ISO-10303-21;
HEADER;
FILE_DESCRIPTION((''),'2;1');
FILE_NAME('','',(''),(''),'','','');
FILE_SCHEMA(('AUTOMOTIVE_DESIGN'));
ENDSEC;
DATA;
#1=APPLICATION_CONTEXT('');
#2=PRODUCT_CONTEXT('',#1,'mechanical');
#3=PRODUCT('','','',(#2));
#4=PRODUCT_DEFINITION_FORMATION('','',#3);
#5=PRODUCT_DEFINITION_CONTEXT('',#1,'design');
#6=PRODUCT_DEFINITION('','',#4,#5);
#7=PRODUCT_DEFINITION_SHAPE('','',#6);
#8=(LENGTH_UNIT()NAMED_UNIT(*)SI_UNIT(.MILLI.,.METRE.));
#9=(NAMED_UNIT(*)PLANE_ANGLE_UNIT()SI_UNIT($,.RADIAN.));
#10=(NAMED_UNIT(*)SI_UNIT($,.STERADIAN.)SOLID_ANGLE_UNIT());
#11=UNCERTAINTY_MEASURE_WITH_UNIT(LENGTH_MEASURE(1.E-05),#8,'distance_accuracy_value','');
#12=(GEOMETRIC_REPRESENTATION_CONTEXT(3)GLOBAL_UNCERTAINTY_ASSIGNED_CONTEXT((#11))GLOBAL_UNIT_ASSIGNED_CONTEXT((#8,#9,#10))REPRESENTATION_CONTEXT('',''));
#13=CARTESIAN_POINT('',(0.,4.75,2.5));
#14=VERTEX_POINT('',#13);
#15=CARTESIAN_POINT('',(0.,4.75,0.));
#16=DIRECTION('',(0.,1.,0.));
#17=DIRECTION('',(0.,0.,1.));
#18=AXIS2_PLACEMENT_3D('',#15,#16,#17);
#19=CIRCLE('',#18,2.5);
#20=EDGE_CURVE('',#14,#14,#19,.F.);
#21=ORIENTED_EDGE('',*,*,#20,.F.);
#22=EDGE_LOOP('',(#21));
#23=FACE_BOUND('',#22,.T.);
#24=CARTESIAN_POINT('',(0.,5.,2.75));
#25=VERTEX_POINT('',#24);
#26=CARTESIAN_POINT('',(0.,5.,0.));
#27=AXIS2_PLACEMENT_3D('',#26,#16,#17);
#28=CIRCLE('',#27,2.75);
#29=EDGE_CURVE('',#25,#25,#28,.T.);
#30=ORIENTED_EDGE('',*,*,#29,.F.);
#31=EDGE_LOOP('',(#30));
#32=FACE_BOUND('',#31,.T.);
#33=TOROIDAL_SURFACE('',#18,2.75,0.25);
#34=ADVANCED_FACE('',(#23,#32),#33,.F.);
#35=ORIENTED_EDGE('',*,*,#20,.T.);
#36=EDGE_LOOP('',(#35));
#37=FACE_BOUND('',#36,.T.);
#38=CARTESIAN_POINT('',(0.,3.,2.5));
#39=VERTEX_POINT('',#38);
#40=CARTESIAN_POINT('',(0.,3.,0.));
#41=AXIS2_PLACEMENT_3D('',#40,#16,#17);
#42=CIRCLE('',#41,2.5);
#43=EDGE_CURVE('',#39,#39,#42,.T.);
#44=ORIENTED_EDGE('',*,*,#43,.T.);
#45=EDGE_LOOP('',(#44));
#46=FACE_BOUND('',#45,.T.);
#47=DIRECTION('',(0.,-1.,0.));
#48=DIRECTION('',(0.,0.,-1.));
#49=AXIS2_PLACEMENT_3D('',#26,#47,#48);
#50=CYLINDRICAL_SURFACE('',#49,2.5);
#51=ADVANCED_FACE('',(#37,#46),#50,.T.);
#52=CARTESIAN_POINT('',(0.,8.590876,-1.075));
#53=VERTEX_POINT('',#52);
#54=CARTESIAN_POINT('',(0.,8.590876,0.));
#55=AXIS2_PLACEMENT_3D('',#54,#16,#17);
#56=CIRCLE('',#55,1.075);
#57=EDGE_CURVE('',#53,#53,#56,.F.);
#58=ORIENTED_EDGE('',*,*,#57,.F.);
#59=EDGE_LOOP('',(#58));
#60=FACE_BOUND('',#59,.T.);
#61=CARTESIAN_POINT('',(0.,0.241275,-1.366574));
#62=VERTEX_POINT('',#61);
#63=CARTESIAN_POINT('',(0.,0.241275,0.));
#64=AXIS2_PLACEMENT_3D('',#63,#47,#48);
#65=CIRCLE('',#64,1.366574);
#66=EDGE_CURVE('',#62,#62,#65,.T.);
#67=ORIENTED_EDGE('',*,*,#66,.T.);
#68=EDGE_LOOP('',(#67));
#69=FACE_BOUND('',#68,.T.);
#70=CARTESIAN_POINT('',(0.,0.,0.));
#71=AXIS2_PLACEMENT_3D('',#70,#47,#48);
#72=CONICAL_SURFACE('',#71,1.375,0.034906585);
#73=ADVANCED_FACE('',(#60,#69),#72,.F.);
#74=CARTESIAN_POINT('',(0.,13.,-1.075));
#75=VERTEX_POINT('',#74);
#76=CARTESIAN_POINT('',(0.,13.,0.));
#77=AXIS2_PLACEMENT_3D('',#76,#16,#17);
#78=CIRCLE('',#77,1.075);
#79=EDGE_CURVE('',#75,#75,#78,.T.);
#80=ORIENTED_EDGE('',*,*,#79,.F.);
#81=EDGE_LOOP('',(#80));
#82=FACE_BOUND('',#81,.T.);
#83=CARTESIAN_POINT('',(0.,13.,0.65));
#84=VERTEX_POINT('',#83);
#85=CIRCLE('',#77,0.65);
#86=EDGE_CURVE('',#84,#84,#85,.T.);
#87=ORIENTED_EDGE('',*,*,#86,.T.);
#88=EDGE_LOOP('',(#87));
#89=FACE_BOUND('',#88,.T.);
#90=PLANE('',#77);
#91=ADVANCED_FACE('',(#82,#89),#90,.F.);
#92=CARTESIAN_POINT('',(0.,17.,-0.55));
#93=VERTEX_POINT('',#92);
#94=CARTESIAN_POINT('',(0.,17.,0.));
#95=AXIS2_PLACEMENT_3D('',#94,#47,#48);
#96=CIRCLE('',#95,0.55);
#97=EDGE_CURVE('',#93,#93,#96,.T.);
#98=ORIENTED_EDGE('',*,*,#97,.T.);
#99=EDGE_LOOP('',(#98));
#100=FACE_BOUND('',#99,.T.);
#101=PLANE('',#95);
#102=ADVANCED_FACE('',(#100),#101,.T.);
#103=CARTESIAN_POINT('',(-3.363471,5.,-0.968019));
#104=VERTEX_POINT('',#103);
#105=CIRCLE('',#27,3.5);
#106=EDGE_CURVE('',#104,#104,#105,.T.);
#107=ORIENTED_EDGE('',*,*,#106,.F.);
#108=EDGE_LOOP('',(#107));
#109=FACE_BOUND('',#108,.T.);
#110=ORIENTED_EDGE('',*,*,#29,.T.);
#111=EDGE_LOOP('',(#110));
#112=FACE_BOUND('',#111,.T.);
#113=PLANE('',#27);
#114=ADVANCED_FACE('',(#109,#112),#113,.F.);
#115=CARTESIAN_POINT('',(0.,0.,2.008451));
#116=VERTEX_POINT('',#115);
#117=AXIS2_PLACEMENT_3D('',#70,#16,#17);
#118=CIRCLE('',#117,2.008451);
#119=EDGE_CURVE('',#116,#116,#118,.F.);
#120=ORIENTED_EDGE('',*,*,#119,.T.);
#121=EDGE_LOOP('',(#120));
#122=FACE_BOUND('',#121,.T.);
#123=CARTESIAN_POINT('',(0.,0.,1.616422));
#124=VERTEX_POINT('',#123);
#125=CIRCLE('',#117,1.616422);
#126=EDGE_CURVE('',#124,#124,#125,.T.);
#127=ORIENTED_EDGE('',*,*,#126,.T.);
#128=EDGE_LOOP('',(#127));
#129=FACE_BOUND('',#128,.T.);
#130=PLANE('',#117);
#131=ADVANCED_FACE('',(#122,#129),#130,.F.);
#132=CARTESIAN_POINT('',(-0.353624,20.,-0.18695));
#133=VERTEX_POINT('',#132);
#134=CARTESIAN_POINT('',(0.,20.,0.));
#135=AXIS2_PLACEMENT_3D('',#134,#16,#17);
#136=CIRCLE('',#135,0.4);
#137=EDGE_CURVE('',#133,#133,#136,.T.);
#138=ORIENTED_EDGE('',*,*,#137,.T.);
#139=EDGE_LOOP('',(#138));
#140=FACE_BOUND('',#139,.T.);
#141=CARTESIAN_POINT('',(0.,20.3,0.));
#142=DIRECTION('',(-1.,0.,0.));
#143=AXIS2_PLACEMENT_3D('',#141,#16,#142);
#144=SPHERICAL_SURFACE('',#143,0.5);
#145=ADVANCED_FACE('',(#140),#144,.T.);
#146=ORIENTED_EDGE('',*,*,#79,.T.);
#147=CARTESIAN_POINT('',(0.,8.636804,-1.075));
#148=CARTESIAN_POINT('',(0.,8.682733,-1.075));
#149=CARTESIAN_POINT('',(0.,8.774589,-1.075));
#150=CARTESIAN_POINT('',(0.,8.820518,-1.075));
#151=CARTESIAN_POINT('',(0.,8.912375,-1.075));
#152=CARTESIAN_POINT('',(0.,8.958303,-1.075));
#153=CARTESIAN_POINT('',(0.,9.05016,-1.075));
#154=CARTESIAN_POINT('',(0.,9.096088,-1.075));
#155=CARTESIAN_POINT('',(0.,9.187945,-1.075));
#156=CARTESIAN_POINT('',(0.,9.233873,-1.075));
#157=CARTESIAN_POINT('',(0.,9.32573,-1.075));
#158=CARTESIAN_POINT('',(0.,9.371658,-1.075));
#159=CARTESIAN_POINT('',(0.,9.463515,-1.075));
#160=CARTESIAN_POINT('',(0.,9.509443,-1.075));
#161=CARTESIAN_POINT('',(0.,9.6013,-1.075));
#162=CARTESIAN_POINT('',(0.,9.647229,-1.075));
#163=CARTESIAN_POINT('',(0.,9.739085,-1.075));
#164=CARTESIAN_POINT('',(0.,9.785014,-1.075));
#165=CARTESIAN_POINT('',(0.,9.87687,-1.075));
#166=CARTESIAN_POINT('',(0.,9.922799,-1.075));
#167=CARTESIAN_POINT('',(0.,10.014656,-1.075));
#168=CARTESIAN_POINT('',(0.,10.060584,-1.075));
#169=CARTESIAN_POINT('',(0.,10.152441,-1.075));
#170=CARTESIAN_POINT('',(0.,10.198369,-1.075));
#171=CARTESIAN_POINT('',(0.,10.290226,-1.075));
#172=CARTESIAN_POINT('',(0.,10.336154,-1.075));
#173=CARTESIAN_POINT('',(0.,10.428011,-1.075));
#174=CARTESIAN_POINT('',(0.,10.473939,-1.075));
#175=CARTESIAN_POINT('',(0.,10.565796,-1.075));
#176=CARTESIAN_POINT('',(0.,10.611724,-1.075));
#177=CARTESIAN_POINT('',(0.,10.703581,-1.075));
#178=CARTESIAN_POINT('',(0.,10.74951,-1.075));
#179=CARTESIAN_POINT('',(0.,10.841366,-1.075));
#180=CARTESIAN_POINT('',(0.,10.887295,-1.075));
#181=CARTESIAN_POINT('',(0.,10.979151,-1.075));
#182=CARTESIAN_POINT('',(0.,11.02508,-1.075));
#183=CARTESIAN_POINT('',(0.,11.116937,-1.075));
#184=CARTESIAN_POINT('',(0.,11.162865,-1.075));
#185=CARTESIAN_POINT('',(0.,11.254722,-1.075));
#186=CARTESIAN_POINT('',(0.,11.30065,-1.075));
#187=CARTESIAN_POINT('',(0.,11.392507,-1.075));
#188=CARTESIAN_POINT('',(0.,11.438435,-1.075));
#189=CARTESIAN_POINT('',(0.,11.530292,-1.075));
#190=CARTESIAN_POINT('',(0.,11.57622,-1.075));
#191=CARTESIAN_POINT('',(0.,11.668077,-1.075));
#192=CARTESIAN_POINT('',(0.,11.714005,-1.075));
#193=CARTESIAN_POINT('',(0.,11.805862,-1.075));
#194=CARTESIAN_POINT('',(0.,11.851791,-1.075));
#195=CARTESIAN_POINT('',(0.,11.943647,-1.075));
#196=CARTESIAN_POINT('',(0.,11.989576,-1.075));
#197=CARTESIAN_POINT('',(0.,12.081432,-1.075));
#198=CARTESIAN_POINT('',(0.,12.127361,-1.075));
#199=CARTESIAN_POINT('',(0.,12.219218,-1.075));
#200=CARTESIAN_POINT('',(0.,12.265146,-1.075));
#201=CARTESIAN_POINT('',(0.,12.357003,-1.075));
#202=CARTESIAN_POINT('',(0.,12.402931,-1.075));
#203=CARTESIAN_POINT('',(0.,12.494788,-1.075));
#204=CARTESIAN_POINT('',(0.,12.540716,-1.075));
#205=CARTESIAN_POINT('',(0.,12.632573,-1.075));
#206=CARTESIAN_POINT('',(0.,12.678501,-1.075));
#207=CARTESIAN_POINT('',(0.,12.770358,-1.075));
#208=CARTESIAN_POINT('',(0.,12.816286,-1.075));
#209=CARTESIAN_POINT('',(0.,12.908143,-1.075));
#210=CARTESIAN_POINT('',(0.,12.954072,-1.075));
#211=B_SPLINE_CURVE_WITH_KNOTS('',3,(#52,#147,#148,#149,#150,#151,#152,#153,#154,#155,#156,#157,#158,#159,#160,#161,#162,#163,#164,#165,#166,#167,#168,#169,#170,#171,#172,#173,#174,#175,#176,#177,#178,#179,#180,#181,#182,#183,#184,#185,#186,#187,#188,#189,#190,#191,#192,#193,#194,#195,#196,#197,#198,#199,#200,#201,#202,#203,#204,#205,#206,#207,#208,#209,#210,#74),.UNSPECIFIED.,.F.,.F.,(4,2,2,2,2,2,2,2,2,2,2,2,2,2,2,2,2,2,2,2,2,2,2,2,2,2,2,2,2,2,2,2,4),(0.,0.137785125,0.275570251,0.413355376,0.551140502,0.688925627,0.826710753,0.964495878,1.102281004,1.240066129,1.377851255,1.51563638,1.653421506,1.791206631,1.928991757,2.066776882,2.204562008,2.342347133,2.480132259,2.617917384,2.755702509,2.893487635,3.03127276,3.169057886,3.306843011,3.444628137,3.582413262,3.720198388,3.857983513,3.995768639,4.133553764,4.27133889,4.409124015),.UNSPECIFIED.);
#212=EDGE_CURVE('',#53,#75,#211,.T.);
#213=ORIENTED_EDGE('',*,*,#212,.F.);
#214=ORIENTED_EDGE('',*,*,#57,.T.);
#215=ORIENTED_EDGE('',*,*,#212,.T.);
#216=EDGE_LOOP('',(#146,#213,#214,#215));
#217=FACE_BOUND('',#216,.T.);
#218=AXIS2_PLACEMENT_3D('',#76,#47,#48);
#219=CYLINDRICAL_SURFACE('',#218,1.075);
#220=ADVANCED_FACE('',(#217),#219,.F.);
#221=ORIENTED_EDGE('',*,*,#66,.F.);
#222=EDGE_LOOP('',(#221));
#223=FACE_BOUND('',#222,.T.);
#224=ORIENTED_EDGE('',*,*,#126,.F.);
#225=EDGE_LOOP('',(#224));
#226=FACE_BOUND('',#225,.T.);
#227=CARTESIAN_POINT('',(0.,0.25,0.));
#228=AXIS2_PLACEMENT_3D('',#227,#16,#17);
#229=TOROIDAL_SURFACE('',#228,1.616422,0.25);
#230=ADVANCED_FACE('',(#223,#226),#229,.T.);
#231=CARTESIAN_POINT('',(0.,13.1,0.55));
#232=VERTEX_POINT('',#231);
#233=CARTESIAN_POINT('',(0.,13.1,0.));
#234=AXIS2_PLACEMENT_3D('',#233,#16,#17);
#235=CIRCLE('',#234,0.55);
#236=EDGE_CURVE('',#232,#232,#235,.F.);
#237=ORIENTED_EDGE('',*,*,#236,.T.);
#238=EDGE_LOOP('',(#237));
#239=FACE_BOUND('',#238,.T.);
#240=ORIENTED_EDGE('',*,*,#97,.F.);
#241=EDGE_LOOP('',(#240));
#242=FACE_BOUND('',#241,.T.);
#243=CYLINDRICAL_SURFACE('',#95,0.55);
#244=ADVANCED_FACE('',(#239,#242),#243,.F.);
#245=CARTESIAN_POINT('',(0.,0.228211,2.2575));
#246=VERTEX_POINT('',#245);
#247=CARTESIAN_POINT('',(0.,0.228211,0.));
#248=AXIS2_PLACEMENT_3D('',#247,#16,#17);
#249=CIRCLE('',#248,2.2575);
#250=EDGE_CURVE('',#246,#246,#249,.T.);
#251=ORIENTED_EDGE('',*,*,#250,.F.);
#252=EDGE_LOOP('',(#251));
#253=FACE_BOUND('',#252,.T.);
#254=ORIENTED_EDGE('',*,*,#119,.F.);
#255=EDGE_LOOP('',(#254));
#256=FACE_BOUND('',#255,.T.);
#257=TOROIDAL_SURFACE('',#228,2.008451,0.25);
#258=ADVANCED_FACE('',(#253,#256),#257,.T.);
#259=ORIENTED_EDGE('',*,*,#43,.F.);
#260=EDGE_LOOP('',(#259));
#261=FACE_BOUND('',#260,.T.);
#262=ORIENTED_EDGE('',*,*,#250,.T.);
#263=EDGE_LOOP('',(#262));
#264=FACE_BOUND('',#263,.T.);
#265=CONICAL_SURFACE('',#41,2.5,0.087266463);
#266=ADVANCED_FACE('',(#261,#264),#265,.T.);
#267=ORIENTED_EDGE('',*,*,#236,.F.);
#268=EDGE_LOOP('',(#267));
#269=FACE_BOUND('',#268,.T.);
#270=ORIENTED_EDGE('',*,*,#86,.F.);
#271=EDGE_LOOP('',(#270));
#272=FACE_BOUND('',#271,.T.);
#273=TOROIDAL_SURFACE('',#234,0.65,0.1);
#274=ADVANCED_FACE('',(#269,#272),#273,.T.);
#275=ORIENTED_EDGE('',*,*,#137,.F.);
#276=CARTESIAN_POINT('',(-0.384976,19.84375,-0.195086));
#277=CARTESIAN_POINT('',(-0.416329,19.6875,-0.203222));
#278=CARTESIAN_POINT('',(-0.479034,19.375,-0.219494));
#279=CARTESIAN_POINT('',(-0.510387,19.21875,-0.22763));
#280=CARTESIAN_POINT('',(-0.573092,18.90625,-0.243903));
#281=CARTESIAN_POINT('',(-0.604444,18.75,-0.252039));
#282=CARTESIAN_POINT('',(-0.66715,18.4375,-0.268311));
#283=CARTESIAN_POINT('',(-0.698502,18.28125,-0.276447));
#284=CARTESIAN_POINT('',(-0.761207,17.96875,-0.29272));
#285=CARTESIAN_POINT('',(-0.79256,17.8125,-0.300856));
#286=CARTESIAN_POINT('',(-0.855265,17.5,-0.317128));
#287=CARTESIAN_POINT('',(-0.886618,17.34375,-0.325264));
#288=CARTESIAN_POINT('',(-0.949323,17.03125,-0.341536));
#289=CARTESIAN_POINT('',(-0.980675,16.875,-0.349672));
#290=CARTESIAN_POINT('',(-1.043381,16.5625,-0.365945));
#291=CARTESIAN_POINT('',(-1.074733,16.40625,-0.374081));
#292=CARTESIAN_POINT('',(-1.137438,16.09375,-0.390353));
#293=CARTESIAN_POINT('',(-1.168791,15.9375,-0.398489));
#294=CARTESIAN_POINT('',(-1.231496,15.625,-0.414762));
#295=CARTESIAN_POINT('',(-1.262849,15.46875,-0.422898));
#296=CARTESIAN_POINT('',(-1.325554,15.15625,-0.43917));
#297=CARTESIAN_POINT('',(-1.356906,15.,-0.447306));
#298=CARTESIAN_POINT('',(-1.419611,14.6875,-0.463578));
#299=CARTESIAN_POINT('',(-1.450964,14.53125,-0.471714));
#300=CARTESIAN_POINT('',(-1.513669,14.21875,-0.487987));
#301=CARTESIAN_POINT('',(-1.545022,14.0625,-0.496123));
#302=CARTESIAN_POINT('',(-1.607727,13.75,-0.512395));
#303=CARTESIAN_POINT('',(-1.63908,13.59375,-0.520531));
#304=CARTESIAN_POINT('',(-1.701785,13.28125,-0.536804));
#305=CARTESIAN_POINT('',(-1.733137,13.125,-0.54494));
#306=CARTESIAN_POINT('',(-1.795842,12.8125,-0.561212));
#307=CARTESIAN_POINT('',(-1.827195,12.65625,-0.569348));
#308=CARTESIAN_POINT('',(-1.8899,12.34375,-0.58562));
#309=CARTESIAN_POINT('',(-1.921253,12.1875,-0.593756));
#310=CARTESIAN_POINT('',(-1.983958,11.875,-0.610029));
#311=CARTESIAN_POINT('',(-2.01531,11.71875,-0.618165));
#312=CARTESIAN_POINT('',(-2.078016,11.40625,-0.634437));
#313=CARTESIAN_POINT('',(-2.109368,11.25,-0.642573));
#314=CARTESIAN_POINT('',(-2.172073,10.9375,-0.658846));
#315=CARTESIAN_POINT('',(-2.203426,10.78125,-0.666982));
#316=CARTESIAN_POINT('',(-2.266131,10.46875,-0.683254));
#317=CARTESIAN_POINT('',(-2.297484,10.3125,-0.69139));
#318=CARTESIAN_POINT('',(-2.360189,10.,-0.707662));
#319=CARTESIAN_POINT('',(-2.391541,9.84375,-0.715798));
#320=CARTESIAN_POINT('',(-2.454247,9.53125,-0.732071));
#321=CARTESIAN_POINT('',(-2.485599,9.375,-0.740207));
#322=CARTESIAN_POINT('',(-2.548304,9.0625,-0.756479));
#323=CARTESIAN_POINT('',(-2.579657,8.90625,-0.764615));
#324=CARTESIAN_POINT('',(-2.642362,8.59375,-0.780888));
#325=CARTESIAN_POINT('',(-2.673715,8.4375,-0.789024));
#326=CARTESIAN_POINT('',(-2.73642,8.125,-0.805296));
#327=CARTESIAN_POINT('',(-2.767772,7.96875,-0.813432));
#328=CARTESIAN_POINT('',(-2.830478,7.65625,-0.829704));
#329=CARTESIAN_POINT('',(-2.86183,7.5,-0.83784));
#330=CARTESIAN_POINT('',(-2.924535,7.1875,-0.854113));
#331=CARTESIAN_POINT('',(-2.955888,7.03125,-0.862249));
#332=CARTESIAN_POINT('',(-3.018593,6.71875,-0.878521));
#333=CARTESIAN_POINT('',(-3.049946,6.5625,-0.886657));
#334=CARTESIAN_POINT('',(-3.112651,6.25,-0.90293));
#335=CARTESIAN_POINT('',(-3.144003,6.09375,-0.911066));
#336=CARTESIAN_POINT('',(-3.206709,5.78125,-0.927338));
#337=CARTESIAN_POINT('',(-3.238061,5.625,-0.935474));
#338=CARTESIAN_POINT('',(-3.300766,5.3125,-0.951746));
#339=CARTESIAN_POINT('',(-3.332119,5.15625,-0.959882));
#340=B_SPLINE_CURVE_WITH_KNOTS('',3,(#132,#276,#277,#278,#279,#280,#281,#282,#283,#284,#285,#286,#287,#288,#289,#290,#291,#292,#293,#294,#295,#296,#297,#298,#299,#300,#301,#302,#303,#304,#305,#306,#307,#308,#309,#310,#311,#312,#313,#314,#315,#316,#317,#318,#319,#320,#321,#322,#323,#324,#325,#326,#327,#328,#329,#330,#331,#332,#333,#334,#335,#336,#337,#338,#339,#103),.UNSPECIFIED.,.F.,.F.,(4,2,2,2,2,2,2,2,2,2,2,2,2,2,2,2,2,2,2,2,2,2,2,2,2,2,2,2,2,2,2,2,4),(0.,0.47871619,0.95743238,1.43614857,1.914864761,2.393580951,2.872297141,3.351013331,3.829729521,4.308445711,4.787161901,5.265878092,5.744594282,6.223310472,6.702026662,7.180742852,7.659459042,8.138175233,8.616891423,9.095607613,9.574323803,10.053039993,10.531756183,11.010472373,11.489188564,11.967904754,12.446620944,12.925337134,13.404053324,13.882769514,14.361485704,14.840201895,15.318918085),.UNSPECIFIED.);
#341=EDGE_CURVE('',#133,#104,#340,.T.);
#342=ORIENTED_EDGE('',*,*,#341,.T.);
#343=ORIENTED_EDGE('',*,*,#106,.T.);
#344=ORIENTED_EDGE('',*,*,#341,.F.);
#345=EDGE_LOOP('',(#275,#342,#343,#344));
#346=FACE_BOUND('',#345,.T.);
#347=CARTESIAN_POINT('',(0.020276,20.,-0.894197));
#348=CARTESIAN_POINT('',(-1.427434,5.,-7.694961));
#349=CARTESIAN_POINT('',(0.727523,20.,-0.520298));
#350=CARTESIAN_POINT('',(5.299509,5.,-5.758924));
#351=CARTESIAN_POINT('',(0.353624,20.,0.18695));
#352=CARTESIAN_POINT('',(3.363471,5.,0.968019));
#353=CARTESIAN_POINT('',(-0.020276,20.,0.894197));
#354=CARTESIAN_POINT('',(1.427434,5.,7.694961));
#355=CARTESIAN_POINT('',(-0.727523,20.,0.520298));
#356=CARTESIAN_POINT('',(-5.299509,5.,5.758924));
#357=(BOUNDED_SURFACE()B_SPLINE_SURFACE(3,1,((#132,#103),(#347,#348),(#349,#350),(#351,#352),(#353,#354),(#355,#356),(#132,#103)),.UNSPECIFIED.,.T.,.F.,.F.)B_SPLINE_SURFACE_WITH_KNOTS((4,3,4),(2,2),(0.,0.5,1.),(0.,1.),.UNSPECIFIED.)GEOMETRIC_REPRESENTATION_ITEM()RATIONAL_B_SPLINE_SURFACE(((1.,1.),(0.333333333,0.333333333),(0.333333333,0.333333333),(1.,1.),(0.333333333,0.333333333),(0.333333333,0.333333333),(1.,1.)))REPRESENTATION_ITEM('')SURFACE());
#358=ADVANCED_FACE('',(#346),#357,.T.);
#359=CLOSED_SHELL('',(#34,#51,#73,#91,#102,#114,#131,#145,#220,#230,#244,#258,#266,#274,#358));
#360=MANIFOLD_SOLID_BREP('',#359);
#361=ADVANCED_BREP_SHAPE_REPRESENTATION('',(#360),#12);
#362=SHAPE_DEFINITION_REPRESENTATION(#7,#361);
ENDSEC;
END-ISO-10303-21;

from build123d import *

# Parameters (mm, degrees)
SKETCH1_R           = 2.5
BOSS_EXTRUDE1_DEPTH = 5
SKETCH4_R           = 1.075
CUT_EXTRUDE1_DEPTH  = 13
CHAMFER1_SIZE       = 0.3
CHAMFER1_SIZE2      = 8.590875985
CHAMFER2_SIZE       = 3
CHAMFER2_SIZE2      = 0.262465991
FILLET2_R           = 0.25
FILLET4_R           = 0.25
SKETCH6_R           = 0.55
CUT_EXTRUDE2_DEPTH  = 4
FILLET5_R           = 0.1


with BuildPart() as part:
    # Sketch1 → Boss-Extrude1 (new body)
    with BuildSketch(Plane(origin=(0, 0, 0), x_dir=(1, 0, 0), z_dir=(0, 1, 0))):
        with Locations(Location((0, 0, 0), (0, 0, 270))):
            Circle(SKETCH1_R)
    extrude(amount=BOSS_EXTRUDE1_DEPTH)

    # Loft1: read off the stored shape, not the designer's step
    # Loft1: loft between two sections, ruled curve by curve
    loft1_from = [
        Edge.make_bspline([(-0.353623786, 20, -0.186949774), (0.020275763, 20, -0.894197346), (0.727523334, 20, -0.520297797), (0.353623786, 20, 0.186949774), (-0.020275763, 20, 0.894197346), (-0.727523334, 20, 0.520297797), (-0.353623786, 20, -0.186949774)], [0, 0, 0, 0, 0.5, 0.5, 0.5, 1, 1, 1, 1], 3, [1, 0.333333333, 0.333333333, 1, 0.333333333, 0.333333333, 1]),
    ]
    loft1_to = [
        Edge.make_bspline([(-3.363471416, 5, -0.968018612), (-1.427434193, 5, -7.694961444), (5.299508639, 5, -5.758924221), (3.363471416, 5, 0.968018612), (1.427434193, 5, 7.694961444), (-5.299508639, 5, 5.758924221), (-3.363471416, 5, -0.968018612)], [0, 0, 0, 0, 0.5, 0.5, 0.5, 1, 1, 1, 1], 3, [1, 0.333333333, 0.333333333, 1, 0.333333333, 0.333333333, 1]),
    ]
    loft1 = Solid(Shell([*[Face.make_surface_from_curves(loft1_from[k], loft1_to[k]) for k in range(1)], Face(Wire(loft1_from)), Face(Wire(loft1_to))]))
    add(loft1)

    # Sketch4 → Cut-Extrude1 (cut)
    with BuildSketch(Plane(origin=(0, 0, 0), x_dir=(1, 0, 0), z_dir=(0, 1, 0))):
        with Locations(Location((0, 0, 0), (0, 0, 90))):
            Circle(SKETCH4_R)
    extrude(amount=CUT_EXTRUDE1_DEPTH, mode=Mode.SUBTRACT)

    # Chamfer1
    chamfer1_edges = [part.edges().sort_by_distance(p)[0] for p in [
        (0, 0, 1.075),
    ]]
    chamfer1_side = [part.faces().sort_by_distance(p)[0] for p in [
        (0, 0, -2.429289322),
    ]]
    chamfer(chamfer1_edges, length=CHAMFER1_SIZE, length2=CHAMFER1_SIZE2, reference=chamfer1_side[0])

    # Chamfer2
    chamfer2_edges = [part.edges().sort_by_distance(p)[0] for p in [
        (0, 0, -2.5),
    ]]
    chamfer2_side = [part.faces().sort_by_distance(p)[0] for p in [
        (0, 2.5, -2.5),
    ]]
    chamfer(chamfer2_edges, length=CHAMFER2_SIZE, length2=CHAMFER2_SIZE2, reference=chamfer2_side[0])

    # Fillet2
    fillet2_edges = [part.edges().sort_by_distance(p)[0] for p in [
        (0, 5, -2.5),
    ]]
    fillet(fillet2_edges, radius=FILLET2_R)

    # Fillet4
    fillet4_edges = [part.edges().sort_by_distance(p)[0] for p in [
        (0, 0, 1.375),
        (0, 0, -2.237534009),
    ]]
    fillet(fillet4_edges, radius=FILLET4_R)

    # Sketch5 → Revolve1 (revolve)
    with BuildSketch(Plane.XY):
        with BuildLine():
            Line((0, 20.8), (0, 19.8))
            ThreePointArc((0, 19.8), (-0.5, 20.3), (0, 20.8))
        make_face()
    revolve(axis=Axis((0, 24.727188158, 0), (0, -1, 0)))

    # Sketch6 → Cut-Extrude2 (cut)
    with BuildSketch(Plane.XZ.offset(-13)):
        with Locations(Location((0, 0, 0), (0, 0, 270))):
            Circle(SKETCH6_R)
    extrude(amount=-CUT_EXTRUDE2_DEPTH, mode=Mode.SUBTRACT)

    # Fillet5
    fillet5_edges = [part.edges().sort_by_distance(p)[0] for p in [
        (0, 13, 0.55),
    ]]
    fillet(fillet5_edges, radius=FILLET5_R)


solid = part.part
